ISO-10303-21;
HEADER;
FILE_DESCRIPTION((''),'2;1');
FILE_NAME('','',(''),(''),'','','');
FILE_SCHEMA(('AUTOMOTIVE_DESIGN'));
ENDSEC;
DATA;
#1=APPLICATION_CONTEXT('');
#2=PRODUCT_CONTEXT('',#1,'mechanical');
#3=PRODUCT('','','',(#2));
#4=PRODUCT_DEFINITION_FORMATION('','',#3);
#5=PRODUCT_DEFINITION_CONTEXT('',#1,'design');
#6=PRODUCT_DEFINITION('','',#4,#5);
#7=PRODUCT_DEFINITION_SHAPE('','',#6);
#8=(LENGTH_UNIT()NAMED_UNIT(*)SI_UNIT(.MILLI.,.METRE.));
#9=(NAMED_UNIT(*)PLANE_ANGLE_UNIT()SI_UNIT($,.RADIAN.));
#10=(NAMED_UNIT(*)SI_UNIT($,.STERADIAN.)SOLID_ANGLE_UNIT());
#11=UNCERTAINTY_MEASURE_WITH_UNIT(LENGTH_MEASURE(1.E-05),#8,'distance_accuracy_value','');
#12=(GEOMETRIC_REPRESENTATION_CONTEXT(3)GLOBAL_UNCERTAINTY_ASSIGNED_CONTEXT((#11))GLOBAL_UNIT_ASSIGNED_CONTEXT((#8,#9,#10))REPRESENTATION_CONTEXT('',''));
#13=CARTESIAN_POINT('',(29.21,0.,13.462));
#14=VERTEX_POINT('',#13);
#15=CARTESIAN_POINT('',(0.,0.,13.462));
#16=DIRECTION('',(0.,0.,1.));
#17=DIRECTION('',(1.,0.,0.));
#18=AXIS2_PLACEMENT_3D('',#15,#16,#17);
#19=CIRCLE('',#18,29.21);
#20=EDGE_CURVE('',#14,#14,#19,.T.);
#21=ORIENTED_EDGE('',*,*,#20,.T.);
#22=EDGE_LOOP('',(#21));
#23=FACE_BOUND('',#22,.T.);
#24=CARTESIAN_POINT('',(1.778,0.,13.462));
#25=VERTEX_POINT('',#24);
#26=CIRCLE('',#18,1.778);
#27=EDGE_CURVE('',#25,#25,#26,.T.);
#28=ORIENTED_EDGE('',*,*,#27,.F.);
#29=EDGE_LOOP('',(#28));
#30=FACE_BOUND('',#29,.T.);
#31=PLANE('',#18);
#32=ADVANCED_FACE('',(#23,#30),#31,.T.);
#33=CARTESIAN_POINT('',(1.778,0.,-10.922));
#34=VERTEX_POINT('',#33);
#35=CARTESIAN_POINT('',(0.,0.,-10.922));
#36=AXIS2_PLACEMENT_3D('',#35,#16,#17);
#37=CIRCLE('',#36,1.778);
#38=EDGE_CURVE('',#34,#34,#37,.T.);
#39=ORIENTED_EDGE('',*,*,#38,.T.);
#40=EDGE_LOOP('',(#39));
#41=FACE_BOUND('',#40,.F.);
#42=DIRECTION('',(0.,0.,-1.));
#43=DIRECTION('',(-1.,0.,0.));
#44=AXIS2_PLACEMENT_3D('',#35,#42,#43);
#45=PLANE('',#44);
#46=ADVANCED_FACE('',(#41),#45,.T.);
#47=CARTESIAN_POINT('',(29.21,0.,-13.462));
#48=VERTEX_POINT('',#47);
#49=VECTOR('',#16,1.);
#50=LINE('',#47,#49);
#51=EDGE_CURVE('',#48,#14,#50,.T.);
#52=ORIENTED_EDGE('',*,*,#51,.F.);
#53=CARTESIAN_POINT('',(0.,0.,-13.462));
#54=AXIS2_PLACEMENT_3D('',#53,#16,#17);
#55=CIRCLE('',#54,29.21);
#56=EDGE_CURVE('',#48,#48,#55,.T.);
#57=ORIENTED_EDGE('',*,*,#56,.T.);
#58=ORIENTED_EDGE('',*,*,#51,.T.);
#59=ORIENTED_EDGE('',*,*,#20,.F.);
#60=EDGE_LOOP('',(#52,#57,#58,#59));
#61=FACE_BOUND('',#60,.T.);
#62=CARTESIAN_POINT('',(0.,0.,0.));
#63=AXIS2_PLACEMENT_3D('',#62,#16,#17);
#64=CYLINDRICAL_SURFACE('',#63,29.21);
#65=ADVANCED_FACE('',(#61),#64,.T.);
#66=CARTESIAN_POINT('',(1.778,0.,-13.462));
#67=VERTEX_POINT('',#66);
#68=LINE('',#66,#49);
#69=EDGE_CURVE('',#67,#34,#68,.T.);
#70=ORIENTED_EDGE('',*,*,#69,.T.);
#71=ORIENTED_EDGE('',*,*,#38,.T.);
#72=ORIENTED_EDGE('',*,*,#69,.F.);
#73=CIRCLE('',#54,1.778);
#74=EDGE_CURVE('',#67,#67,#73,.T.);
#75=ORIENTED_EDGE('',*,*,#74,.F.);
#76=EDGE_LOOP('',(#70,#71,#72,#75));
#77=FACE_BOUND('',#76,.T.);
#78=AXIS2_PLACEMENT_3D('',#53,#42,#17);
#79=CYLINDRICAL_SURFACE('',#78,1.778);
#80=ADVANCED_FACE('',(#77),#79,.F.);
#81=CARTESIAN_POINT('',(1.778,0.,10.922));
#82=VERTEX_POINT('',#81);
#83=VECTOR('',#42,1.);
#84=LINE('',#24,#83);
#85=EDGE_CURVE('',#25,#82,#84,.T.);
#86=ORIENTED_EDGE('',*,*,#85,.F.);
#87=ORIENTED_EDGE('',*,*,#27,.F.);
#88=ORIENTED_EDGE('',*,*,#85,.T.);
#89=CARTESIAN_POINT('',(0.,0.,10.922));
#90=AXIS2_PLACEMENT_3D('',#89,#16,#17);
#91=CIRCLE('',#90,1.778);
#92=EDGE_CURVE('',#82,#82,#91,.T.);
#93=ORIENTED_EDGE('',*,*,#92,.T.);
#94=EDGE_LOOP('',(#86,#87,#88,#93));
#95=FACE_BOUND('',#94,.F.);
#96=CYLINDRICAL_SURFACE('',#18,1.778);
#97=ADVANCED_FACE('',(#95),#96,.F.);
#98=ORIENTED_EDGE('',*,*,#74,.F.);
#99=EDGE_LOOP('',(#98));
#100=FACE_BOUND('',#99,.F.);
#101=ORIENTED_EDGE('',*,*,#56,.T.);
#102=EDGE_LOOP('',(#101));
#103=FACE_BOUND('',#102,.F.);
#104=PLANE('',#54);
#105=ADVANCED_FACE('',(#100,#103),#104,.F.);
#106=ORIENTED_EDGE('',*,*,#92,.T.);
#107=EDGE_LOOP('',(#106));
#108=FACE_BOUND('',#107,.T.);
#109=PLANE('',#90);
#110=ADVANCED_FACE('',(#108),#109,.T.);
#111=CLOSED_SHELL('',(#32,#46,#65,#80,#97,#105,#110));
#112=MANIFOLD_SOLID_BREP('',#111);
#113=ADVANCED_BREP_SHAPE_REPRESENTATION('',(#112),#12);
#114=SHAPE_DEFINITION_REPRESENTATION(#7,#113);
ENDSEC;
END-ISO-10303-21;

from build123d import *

# Parameters (mm, degrees)
F0_R     = 29.21
F1_DEPTH = 13.462
F2_R     = 1.778
F3_DEPTH = 2.54


# Not quite as in the source:
# - a pattern or mirror of a feature is missing from the dataset's text; its kind, count and spacing are read off the source's solid


with BuildPart() as f1:
    # F0 (on Top) → F1 (new body, symmetric)
    with BuildSketch(Plane.XY):
        Circle(F0_R)
    extrude(amount=F1_DEPTH, both=True)

    # F2 (on face) → F3 (cut)
    with BuildSketch(Plane.XY.offset(13.462)):
        Circle(F2_R)
    f3 = extrude(amount=-F3_DEPTH, mode=Mode.SUBTRACT)

    # F3_copies: F3 across plane
    add(f3.mirror(Plane(origin=(0, 0, 0), x_dir=(-1, 0, 0), z_dir=(0, 0, -1))), mode=Mode.SUBTRACT)


solid = f1.part
